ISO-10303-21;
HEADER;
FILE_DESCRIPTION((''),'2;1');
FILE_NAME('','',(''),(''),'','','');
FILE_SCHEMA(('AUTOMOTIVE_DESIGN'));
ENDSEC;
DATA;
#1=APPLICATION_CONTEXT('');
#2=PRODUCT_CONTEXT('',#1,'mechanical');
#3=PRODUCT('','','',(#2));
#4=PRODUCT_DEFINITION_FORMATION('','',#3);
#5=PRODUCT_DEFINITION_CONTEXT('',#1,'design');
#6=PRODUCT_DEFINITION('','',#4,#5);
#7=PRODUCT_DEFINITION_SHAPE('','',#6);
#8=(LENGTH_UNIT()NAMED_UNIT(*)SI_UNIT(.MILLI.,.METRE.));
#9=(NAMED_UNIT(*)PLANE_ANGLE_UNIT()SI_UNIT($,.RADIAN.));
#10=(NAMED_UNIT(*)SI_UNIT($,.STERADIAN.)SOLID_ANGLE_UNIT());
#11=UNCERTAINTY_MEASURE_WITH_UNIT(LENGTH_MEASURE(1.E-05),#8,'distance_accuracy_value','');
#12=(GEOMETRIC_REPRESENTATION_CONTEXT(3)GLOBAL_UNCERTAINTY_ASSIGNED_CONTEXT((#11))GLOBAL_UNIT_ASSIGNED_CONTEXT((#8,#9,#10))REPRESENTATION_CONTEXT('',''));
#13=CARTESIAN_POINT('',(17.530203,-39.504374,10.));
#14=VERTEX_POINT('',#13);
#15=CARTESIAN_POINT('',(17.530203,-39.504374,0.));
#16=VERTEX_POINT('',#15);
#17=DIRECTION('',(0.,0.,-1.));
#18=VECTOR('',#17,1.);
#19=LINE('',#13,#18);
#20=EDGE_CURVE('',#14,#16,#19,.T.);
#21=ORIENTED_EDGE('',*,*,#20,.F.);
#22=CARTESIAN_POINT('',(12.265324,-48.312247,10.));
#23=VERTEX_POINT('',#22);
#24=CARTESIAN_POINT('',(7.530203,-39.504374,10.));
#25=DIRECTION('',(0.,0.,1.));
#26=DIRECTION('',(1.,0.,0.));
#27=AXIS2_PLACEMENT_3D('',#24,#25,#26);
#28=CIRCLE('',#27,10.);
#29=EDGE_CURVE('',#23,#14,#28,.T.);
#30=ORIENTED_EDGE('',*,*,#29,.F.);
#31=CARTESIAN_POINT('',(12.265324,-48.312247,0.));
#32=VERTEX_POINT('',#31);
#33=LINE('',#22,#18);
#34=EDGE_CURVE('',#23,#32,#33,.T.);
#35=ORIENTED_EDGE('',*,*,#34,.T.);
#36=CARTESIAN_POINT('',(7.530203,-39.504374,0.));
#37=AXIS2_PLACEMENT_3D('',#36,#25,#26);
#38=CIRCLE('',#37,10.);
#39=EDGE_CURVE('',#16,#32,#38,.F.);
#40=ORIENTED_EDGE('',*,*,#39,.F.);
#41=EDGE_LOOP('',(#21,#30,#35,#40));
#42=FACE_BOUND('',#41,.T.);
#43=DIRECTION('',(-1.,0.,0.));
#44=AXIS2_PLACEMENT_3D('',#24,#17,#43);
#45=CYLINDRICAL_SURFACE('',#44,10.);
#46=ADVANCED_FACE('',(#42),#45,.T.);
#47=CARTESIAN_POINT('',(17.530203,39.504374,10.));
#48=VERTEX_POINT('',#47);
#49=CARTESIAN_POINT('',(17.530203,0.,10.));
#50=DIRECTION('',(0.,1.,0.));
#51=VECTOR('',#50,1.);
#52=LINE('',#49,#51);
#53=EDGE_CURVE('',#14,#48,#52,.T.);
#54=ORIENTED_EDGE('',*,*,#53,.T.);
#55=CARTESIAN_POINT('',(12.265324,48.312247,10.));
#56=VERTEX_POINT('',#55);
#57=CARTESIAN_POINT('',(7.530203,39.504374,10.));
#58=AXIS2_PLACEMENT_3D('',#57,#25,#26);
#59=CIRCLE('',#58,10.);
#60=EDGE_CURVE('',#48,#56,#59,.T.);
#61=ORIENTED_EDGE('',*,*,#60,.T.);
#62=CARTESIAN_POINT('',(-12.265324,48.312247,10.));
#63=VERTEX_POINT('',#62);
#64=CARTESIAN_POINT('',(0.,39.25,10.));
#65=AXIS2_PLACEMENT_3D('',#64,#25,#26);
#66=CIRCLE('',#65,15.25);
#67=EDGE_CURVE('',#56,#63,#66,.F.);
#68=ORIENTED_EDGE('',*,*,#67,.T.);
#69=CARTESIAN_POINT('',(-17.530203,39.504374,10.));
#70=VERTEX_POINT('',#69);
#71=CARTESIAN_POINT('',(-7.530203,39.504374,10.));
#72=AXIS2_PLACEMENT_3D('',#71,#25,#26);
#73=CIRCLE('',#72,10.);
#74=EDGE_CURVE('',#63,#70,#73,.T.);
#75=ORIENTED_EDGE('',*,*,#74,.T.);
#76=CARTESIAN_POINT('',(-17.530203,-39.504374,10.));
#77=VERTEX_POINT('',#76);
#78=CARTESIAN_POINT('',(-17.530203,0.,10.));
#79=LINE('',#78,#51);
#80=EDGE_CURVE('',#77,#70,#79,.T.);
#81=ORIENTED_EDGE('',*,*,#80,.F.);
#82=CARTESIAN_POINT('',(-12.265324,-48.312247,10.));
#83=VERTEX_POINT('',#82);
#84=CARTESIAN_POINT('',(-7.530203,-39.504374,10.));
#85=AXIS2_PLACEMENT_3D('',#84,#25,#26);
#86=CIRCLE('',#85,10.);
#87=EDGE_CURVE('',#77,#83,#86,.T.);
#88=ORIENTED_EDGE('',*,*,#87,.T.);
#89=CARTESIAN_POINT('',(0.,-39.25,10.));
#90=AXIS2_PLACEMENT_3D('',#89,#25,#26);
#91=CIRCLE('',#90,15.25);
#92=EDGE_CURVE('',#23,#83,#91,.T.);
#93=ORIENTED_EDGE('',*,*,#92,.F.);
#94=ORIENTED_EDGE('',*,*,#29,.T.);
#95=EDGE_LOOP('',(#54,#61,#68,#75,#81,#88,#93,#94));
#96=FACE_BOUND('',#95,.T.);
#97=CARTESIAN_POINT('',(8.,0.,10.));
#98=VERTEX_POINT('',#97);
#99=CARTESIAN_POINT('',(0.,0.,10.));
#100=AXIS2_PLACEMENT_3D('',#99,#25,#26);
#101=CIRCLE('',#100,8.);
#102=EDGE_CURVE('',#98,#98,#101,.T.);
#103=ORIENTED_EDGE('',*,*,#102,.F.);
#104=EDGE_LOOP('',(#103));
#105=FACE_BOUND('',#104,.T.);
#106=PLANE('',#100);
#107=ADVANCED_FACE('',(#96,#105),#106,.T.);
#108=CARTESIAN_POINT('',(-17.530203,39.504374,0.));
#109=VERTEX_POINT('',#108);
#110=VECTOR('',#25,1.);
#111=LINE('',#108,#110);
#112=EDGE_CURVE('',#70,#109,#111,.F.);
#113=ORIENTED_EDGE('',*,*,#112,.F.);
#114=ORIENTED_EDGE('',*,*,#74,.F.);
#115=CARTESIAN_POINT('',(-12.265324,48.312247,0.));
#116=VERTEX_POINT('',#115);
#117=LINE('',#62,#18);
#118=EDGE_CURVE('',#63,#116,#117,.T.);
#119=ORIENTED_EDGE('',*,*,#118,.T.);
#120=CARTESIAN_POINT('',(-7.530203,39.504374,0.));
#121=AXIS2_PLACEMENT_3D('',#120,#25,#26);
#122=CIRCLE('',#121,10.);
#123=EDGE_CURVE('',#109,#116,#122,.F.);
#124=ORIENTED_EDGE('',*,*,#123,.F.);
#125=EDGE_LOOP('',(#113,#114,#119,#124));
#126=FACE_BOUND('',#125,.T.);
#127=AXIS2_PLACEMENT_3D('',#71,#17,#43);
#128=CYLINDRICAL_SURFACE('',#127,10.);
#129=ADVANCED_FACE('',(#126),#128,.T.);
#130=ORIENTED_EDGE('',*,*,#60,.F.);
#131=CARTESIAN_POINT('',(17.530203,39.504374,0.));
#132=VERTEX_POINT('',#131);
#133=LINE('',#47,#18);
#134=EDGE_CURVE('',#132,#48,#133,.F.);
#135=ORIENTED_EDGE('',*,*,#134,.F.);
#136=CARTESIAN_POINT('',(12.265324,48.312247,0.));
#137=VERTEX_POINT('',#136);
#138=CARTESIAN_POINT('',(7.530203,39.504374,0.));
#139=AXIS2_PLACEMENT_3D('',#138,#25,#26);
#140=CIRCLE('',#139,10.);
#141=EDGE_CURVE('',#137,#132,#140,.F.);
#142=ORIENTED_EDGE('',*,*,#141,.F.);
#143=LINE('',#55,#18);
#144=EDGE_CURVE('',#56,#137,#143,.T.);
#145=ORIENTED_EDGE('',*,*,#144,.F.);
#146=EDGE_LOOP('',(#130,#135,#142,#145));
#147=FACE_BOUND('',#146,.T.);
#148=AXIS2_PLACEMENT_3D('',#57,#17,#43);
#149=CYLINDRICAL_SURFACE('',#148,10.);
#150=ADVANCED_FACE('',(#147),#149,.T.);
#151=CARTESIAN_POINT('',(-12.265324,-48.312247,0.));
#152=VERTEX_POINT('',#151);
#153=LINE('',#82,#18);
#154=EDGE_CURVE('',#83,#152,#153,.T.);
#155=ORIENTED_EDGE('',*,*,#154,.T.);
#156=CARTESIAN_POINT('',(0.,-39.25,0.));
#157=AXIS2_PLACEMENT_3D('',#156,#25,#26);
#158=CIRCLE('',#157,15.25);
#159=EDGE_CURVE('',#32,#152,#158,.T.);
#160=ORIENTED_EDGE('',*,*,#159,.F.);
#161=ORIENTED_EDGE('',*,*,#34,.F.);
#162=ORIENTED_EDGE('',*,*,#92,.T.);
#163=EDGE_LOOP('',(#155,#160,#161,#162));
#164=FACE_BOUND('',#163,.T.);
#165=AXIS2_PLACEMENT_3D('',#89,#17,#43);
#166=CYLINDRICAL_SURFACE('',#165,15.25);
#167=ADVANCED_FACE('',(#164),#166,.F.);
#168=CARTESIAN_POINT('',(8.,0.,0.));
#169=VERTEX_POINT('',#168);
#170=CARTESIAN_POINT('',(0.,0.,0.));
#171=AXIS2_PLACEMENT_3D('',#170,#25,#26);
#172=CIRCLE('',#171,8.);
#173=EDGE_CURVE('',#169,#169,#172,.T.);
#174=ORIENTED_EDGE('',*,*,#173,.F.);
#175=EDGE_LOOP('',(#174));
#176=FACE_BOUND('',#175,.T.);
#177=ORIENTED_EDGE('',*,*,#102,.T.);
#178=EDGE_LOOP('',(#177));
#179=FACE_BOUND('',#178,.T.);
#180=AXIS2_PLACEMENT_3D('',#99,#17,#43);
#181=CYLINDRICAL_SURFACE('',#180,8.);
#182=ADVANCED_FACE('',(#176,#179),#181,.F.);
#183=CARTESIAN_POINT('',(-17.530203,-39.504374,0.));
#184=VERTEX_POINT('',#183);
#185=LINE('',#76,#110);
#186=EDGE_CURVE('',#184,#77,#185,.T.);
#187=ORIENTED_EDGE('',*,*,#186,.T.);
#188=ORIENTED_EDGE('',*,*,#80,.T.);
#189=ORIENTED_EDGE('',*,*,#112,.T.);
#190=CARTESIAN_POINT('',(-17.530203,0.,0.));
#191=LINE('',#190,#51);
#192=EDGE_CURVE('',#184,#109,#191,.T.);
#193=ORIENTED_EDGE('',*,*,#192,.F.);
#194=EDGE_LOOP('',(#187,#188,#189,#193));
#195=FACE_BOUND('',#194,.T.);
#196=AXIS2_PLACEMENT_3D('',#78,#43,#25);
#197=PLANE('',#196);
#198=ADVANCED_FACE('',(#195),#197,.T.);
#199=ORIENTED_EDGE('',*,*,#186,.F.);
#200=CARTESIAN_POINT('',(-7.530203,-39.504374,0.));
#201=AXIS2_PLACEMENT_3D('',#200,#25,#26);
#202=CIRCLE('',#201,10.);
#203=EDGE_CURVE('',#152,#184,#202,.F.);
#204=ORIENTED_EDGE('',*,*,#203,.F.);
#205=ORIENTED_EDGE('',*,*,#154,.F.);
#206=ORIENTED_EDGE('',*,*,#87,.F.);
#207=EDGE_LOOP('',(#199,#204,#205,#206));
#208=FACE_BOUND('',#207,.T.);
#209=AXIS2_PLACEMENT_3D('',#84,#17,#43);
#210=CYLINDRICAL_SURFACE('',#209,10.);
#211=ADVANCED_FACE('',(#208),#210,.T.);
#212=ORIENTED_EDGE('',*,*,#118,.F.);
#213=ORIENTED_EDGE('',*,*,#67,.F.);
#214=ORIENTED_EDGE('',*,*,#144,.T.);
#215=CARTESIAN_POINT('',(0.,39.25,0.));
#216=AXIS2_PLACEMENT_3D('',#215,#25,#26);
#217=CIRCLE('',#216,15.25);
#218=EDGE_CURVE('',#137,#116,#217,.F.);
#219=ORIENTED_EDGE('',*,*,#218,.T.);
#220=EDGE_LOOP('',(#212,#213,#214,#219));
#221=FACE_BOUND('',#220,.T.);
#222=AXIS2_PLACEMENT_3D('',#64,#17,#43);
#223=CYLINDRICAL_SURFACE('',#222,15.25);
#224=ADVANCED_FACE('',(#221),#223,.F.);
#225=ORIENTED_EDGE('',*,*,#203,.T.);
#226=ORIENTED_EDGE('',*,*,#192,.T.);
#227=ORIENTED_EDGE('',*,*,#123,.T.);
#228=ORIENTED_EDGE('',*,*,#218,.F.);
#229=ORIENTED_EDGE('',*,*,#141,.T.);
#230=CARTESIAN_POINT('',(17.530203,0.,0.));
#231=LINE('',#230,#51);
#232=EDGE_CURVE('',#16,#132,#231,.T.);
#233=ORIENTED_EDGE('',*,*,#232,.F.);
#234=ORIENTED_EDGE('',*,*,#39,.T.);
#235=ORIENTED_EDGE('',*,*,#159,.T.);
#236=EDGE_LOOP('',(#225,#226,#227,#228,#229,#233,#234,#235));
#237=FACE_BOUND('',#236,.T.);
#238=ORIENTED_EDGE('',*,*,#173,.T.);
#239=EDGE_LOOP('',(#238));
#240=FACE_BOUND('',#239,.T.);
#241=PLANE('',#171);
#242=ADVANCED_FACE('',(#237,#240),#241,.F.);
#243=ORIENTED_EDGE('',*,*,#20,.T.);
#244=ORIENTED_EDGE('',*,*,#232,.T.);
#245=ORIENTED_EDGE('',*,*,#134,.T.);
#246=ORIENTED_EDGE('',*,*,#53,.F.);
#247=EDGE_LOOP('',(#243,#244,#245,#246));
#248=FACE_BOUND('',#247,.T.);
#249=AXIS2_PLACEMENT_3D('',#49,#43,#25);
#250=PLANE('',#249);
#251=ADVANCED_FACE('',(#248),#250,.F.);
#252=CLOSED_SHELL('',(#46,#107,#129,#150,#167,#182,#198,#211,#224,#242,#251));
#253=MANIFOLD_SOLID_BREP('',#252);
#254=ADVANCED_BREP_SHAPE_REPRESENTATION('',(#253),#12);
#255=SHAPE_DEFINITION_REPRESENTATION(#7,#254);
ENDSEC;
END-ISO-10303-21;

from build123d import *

# Parameters (mm, degrees)
SKETCH1_R           = 8
BOSS_EXTRUDE1_DEPTH = 10
FILLET1_R           = 10


with BuildPart() as part:
    # Sketch1 → Boss-Extrude1 (new body)
    with BuildSketch(Plane(origin=(0, 0, 0), x_dir=(0, 1, 0), z_dir=(0, 0, 1))):
        with BuildLine():
            Line((48.312247408, -17.530203429), (48.312247408, -12.265323963))
            ThreePointArc((48.312247408, -12.265323963), (24, 0), (48.312247408, 12.265323963))
            Line((48.312247408, 12.265323963), (48.312247408, 17.530203429))
            Line((48.312247408, 17.530203429), (-48.312247408, 17.530203429))
            Line((-48.312247408, 17.530203429), (-48.312247408, 12.265323963))
            ThreePointArc((-48.312247408, 12.265323963), (-24, 0), (-48.312247408, -12.265323963))
            Line((-48.312247408, -12.265323963), (-48.312247408, -17.530203429))
            Line((-48.312247408, -17.530203429), (48.312247408, -17.530203429))
        make_face()
        with Locations(Location((0, 0, 0), (0, 0, 270))):
            Circle(SKETCH1_R, mode=Mode.SUBTRACT)
    extrude(amount=BOSS_EXTRUDE1_DEPTH)

    # Fillet1
    # the kernel refuses this fillet: 10 mm, written as the material it takes off along each edge
    with BuildSketch(Plane(origin=(-17.530203429, 48.312247408, -22.019683457), x_dir=(1, 0, 0), z_dir=(0, 0, 1)), Plane(origin=(17.530203429, -48.312247408, -22.019683457), x_dir=(-1, 0, 0), z_dir=(0, 0, 1))) as fillet1_piece_1:
        with BuildLine():
            CenterArc((10, -8.807873383), FILLET1_R, 118.262514111, 61.737485889)
            Line((0, -8.807873383), (-0.2, -8.807873383))
            Line((-0.2, -8.807873383), (-0.2, 0))
            Line((-0.2, 0), (0, 0.2))
            ThreePointArc((0, 0.2), (2.632439733, 0.2), (5.170177055, 0.176157468))
            Line((5.170177055, 0.176157468), (5.264879466, 0))
        make_face()
    extrude(amount=54.039366915, mode=Mode.SUBTRACT)
    with BuildSketch(Plane(origin=(-17.530203429, -48.312247408, -22.019683457), x_dir=(0, 1, 0), z_dir=(0, 0, 1)), Plane(origin=(17.530203429, 48.312247408, -22.019683457), x_dir=(0, -1, 0), z_dir=(0, 0, 1))) as fillet1_piece_2:
        with BuildLine():
            CenterArc((8.807873383, -10), FILLET1_R, 90, 61.737485889)
            Line((0, -5.264879466), (-0.176157468, -5.170177055))
            ThreePointArc((-0.176157468, -5.170177055), (-0.2, -2.632439733), (-0.2, 0))
            Line((-0.2, 0), (0, 0.2))
            Line((0, 0.2), (8.807873383, 0.2))
            Line((8.807873383, 0.2), (8.807873383, 0))
        make_face()
    extrude(amount=54.039366915, mode=Mode.SUBTRACT)


solid = part.part
